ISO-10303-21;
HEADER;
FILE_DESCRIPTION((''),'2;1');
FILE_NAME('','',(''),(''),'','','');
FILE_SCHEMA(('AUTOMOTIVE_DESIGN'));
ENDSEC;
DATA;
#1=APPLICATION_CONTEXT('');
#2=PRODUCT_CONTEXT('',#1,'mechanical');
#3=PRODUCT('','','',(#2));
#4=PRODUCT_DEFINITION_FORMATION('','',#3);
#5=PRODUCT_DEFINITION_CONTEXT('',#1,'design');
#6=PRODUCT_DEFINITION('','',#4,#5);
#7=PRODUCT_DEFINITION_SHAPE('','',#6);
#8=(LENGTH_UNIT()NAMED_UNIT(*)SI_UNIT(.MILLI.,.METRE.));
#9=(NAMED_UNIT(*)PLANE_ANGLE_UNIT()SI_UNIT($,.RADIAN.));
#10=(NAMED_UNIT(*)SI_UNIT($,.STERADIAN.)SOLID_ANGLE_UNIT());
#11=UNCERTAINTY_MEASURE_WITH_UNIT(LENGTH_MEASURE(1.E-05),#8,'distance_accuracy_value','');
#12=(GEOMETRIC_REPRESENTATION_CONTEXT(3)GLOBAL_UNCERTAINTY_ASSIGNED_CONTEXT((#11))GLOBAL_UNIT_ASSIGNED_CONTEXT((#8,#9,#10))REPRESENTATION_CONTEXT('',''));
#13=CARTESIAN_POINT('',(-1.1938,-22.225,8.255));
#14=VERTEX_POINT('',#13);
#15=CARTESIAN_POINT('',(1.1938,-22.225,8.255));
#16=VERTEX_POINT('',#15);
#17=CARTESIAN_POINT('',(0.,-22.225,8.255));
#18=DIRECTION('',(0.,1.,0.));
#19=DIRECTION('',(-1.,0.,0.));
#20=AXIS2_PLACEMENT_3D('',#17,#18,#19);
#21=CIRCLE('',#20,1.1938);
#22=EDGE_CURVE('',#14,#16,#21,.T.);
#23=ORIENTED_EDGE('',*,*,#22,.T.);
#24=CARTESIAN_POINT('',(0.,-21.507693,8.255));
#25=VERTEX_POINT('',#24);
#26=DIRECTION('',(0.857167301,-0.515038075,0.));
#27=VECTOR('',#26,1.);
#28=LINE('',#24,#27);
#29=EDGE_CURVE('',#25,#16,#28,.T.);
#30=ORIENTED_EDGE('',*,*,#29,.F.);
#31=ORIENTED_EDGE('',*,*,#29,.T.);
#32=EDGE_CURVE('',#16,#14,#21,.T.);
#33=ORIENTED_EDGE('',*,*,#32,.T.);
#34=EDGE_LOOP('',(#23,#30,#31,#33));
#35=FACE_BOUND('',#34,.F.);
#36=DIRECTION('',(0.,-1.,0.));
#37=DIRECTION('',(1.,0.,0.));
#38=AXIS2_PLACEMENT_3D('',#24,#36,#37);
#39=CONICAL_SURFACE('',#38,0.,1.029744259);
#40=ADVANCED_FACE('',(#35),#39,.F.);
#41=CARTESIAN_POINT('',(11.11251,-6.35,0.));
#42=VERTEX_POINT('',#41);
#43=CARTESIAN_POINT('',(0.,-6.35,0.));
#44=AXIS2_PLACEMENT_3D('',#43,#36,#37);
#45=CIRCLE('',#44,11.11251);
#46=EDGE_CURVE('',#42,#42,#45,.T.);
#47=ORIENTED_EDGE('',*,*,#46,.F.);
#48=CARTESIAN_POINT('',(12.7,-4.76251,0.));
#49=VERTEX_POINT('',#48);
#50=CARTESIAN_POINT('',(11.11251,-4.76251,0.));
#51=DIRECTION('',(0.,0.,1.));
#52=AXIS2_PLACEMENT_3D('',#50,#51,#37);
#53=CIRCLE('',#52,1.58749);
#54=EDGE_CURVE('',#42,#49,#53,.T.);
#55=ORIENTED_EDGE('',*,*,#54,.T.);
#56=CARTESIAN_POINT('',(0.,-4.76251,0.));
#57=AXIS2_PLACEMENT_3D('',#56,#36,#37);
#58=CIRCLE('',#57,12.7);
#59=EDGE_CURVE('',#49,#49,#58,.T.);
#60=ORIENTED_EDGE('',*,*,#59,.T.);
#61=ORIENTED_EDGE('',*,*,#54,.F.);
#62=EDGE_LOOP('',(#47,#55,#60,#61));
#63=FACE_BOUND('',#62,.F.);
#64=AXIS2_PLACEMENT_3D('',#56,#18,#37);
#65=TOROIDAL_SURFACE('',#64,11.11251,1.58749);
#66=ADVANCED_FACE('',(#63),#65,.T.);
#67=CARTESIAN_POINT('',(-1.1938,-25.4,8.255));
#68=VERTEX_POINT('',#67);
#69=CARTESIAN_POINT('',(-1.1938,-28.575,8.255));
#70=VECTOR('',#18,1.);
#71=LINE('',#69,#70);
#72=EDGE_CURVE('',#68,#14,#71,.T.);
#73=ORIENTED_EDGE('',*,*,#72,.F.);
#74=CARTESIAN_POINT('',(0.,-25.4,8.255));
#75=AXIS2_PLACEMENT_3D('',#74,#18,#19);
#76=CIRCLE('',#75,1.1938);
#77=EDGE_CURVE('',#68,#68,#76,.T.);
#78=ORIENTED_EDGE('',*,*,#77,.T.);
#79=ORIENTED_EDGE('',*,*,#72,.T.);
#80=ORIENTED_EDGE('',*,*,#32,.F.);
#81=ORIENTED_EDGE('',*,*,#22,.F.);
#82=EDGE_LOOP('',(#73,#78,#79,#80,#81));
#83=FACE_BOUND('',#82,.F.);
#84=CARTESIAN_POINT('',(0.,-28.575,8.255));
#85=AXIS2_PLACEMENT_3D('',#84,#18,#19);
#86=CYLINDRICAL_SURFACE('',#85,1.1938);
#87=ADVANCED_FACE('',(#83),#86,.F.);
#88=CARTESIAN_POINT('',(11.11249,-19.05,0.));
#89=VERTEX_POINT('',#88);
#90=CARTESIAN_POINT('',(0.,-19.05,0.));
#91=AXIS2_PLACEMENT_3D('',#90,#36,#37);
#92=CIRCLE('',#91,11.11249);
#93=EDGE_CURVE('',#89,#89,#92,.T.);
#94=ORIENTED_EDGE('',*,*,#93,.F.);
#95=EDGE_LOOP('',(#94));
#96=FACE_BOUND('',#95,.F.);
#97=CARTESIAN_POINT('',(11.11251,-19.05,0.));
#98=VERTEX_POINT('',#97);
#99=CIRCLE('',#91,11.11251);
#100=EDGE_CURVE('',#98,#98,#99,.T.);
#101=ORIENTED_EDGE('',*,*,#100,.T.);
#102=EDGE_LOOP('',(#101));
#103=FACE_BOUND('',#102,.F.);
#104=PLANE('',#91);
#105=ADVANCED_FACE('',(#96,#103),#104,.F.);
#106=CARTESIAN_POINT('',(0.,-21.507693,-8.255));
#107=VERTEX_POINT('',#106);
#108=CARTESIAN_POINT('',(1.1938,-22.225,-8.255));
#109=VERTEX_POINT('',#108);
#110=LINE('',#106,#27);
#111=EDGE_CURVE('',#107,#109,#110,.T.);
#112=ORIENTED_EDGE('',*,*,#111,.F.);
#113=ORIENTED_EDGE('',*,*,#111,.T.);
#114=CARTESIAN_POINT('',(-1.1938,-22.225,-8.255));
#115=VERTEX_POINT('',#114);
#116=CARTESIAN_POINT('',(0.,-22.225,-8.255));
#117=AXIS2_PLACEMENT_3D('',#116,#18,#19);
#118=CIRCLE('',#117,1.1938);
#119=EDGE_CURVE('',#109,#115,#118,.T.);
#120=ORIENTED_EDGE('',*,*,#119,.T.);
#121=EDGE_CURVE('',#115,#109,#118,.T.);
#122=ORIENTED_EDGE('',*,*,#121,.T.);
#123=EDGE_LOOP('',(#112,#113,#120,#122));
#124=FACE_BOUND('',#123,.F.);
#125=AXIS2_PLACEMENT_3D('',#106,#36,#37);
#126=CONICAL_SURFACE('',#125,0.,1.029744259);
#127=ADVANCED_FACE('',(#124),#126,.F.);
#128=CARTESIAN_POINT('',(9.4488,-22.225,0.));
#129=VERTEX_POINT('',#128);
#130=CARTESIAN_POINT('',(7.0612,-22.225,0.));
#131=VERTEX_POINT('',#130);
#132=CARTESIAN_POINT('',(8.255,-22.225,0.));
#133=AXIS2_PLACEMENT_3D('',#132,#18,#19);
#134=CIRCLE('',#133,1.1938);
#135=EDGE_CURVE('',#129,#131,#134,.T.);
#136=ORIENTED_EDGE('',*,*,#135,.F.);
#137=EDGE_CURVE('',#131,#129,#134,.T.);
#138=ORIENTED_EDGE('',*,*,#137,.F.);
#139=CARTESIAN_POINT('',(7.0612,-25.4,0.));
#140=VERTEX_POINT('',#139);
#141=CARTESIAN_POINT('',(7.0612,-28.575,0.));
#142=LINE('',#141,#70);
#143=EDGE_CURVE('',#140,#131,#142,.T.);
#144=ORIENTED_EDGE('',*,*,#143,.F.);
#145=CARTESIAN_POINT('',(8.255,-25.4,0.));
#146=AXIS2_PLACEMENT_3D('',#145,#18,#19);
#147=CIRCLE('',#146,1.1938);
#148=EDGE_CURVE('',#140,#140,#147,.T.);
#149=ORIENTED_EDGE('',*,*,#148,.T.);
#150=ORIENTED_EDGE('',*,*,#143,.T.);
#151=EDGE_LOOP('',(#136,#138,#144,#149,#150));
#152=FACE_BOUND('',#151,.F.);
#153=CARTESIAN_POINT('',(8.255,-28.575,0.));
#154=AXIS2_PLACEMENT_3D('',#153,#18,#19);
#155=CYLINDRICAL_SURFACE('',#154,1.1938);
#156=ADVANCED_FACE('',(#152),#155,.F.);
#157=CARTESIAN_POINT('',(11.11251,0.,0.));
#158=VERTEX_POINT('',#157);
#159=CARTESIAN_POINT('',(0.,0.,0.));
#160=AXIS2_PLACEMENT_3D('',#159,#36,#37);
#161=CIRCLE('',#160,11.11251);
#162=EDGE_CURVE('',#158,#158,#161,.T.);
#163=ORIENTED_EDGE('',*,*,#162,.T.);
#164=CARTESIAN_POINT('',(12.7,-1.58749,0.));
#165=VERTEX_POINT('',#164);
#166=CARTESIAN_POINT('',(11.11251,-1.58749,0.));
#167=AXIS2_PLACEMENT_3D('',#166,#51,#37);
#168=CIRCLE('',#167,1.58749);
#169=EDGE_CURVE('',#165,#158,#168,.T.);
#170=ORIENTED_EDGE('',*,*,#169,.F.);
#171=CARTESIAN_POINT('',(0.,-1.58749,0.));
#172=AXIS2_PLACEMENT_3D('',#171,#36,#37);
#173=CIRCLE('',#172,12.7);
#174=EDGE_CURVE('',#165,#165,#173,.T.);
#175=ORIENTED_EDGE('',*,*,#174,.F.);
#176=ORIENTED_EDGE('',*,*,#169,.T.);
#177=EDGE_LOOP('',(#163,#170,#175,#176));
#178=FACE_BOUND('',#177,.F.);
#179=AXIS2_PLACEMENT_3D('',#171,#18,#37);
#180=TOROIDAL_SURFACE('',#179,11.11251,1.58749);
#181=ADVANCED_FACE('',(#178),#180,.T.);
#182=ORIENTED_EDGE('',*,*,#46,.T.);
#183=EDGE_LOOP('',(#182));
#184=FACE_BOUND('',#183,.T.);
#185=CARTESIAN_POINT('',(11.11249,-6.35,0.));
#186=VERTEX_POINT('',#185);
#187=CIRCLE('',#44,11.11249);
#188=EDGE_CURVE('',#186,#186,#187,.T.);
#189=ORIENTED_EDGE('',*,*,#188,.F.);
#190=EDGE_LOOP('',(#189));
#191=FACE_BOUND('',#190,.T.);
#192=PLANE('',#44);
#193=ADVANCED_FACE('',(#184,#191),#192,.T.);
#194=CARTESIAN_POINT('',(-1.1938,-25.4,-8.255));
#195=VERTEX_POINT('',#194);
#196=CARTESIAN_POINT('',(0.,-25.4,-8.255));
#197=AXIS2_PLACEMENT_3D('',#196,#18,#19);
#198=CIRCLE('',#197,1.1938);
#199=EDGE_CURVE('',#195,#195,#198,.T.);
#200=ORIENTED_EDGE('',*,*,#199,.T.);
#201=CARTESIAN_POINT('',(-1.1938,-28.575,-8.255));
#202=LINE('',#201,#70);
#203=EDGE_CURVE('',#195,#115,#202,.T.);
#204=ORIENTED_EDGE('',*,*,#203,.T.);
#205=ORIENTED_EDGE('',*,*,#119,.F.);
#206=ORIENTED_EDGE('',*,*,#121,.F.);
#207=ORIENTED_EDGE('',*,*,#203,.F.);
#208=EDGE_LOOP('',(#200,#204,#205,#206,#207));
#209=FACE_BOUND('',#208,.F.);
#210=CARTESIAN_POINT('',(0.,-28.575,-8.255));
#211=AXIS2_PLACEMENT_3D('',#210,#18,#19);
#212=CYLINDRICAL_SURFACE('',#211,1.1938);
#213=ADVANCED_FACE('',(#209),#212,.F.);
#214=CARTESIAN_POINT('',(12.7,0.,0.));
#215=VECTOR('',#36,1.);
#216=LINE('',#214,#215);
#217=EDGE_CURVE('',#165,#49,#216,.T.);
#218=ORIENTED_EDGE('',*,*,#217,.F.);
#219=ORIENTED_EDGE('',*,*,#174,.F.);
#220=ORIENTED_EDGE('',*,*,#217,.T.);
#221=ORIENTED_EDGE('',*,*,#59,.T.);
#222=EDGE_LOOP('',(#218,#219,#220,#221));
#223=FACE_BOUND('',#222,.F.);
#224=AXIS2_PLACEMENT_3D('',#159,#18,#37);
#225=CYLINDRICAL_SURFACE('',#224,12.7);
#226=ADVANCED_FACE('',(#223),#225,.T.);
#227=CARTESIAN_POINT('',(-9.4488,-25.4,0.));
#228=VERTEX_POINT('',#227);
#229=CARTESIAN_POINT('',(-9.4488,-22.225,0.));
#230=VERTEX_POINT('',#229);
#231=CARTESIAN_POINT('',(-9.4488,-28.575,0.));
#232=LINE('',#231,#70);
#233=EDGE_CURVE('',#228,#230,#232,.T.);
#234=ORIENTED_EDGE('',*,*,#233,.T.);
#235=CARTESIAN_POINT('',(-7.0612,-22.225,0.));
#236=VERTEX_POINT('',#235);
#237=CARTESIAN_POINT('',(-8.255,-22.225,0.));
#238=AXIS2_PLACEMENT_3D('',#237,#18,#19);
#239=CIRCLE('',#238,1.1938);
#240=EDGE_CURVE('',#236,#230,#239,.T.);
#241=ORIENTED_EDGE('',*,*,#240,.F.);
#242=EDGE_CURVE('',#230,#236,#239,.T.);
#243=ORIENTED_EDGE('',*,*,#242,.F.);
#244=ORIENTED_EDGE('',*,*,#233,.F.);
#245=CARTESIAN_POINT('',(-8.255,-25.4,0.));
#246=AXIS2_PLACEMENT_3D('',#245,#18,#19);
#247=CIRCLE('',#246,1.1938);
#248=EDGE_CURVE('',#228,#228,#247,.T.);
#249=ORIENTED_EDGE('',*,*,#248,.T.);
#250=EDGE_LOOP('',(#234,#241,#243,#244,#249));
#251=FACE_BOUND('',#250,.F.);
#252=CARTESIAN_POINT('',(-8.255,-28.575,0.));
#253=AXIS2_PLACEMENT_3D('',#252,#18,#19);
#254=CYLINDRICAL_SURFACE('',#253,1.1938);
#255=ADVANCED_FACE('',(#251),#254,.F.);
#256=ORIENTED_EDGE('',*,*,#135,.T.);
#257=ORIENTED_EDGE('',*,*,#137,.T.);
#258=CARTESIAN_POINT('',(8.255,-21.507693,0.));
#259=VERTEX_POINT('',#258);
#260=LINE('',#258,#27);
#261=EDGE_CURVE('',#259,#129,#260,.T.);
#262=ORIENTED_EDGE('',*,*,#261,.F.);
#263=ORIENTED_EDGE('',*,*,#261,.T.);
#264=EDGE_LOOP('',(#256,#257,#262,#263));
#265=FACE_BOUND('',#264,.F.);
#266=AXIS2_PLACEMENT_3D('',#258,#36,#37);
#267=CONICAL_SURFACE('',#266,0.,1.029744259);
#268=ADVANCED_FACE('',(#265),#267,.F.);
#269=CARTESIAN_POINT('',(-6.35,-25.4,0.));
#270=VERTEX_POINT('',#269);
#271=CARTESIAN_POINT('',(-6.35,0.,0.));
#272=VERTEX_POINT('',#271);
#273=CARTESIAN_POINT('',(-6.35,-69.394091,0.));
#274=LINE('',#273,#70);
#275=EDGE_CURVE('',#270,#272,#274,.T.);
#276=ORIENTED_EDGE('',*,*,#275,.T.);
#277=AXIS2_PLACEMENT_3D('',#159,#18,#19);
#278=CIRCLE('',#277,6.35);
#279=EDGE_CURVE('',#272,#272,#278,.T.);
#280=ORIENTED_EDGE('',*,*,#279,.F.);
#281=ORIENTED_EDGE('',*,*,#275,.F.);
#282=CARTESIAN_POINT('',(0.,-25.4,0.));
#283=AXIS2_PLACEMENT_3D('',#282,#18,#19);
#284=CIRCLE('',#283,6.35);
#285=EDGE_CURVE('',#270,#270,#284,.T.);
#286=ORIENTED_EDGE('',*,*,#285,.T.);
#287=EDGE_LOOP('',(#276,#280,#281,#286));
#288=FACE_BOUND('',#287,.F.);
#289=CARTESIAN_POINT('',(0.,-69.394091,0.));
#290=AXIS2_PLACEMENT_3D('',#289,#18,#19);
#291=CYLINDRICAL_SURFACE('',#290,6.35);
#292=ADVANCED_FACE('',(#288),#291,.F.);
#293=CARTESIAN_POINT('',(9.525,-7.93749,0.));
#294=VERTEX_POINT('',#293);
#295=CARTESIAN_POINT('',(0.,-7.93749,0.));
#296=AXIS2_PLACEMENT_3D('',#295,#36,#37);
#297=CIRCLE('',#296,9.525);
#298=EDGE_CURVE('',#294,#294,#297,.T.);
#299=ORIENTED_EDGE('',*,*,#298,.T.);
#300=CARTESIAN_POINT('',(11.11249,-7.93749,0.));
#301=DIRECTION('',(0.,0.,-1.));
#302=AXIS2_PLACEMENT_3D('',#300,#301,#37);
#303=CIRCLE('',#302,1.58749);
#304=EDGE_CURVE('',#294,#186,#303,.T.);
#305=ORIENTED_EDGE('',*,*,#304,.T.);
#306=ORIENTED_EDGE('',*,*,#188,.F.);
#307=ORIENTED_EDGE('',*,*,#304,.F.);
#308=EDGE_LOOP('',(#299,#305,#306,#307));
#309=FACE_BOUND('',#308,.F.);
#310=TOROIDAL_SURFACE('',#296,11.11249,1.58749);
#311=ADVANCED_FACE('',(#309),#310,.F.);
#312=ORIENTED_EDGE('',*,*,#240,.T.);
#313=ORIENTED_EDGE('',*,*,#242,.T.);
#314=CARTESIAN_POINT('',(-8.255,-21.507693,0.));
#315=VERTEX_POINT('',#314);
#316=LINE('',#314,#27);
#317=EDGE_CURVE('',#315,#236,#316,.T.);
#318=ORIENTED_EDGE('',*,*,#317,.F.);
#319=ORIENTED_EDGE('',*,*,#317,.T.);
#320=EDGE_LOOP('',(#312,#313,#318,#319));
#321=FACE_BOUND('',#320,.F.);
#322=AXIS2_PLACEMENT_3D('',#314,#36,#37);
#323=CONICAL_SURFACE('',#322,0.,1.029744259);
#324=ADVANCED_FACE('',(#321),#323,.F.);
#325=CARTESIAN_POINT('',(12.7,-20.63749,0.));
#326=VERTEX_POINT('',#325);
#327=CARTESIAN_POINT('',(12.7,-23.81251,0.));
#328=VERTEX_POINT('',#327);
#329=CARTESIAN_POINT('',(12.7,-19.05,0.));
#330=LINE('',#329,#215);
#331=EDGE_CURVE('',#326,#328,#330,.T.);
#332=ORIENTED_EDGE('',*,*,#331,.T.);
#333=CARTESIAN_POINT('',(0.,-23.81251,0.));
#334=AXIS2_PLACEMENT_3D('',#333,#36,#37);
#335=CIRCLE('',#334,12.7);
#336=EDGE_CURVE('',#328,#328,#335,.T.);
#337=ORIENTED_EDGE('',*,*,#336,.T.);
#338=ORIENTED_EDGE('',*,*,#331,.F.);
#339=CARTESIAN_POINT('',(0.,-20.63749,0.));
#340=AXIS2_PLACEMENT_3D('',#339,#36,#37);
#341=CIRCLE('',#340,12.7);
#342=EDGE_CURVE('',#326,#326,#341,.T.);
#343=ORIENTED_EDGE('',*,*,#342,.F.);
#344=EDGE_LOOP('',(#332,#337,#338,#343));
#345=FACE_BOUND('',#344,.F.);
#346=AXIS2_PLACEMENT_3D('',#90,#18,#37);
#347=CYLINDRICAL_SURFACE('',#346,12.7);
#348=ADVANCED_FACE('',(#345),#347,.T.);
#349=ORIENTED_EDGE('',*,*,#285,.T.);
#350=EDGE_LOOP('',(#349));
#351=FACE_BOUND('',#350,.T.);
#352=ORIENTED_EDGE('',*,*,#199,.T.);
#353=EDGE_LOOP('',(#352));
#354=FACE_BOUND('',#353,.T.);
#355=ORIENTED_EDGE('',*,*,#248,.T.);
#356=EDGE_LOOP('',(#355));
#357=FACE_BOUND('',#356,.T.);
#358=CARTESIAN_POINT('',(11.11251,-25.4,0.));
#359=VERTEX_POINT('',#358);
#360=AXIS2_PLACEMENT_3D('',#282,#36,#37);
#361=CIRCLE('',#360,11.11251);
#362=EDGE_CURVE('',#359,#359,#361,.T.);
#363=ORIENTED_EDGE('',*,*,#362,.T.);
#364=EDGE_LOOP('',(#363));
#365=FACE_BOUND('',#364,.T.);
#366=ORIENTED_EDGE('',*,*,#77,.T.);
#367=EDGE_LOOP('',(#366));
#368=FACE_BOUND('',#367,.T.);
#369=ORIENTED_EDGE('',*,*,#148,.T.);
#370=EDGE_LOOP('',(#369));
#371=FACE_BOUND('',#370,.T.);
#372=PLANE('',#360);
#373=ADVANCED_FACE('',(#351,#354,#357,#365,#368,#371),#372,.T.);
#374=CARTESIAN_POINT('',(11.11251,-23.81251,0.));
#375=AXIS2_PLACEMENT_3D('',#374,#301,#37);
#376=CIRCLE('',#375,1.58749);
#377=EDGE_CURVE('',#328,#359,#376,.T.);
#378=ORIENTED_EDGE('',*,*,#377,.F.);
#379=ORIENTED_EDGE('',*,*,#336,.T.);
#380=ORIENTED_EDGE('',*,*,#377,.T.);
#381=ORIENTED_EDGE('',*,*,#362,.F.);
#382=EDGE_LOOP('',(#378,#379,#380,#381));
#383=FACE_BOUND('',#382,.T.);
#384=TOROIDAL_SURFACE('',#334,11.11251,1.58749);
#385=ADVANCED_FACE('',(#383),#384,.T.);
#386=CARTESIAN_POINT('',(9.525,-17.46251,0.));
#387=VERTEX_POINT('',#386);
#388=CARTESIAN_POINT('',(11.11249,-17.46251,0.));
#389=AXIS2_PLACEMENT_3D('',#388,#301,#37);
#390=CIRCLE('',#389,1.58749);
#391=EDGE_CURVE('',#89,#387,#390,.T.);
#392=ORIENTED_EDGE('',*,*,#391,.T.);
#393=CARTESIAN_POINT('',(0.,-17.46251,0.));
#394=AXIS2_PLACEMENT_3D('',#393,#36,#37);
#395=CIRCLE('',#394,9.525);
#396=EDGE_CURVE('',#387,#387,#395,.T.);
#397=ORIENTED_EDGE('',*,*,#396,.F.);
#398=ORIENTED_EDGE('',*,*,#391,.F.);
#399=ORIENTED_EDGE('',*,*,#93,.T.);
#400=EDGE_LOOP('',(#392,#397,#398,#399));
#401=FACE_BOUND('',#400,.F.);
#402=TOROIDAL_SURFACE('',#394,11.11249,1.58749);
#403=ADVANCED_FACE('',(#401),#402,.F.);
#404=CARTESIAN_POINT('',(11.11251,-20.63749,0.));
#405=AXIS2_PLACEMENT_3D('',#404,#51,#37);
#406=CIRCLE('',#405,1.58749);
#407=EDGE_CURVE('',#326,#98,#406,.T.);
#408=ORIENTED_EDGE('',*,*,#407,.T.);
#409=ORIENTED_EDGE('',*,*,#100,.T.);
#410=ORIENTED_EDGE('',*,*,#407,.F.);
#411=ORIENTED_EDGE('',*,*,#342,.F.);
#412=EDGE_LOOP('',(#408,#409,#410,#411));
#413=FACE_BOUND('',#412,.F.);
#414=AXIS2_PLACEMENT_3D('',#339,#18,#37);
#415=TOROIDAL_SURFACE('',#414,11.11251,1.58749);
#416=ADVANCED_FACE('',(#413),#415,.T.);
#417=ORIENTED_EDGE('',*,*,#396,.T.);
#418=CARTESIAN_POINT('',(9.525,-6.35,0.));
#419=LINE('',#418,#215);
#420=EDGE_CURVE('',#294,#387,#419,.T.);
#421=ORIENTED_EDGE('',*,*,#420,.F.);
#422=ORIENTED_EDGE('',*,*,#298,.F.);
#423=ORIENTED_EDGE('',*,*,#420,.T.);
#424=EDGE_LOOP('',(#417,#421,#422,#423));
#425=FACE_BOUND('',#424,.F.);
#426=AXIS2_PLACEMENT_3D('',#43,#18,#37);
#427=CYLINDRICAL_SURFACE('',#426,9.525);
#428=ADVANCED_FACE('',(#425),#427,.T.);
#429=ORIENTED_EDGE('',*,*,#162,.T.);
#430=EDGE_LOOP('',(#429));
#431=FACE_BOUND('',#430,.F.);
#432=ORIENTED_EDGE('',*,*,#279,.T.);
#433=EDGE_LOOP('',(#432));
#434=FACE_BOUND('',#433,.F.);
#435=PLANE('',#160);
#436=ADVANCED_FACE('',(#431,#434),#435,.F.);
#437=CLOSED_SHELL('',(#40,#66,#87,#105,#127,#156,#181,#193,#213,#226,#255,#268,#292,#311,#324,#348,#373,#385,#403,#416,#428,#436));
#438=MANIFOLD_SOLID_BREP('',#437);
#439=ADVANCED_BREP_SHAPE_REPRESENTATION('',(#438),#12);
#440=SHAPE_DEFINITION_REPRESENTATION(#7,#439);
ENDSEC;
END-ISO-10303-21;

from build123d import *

# Parameters (mm, degrees)
F0_R     = 12.7
F1_DEPTH = 6.35
F2_R     = 9.525
F3_DEPTH = 12.7
F4_R     = 12.7
F5_DEPTH = 6.35
F6_R     = 1.58749
F8_D     = 12.7
F9_D     = 2.3876
F9_DEPTH = 3.175
F9_TIP   = 0.717307407


# Not quite as in the source:
# - a fillet or chamfer is up to 0.001 mm smaller than in the source, because OpenCascade refuses the exact size


with BuildPart() as f1:
    # F0 (on Front) → F1 (new body)
    with BuildSketch(Plane.XZ):
        Circle(F0_R)
    extrude(amount=F1_DEPTH)

    # F2 (on face) → F3 (join)
    with BuildSketch(Plane.XZ.offset(6.35)):
        Circle(F2_R)
    extrude(amount=F3_DEPTH)

    # F4 (on face) → F5 (join)
    with BuildSketch(Plane.XZ.offset(19.05)):
        Circle(F4_R)
    extrude(amount=F5_DEPTH)

    # F6 (radius 1.5875 in the source; OpenCascade refuses exactly that, so slightly less here)
    f6_edges = [f1.edges().sort_by_distance(p)[0] for p in [
        (-12.7, 0, 0),
        (-12.7, -6.35, 0),
        (12.7, -22.225, 0),
        (-12.7, -19.05, 0),
        (-12.7, -25.4, 0),
        (-9.525, -6.35, 0),
        (-9.525, -19.05, 0),
    ]]
    fillet(f6_edges, radius=F6_R)

    # F8 (through all)
    with Locations(Plane.XZ.offset(25.4)):
        with Locations((0, 0)):
            Hole(F8_D / 2)

    # F9
    with Locations(Plane.XZ.offset(25.4)):
        with Locations((0, 8.255), (8.255, 0), (0, -8.255), (-8.255, 0)):
            Hole(F9_D / 2, depth=F9_DEPTH)
            with Locations((0, 0, -(F9_DEPTH + F9_TIP / 2))):  # 118° drill point
                Cone(0, F9_D / 2, F9_TIP, mode=Mode.SUBTRACT)


solid = f1.part
